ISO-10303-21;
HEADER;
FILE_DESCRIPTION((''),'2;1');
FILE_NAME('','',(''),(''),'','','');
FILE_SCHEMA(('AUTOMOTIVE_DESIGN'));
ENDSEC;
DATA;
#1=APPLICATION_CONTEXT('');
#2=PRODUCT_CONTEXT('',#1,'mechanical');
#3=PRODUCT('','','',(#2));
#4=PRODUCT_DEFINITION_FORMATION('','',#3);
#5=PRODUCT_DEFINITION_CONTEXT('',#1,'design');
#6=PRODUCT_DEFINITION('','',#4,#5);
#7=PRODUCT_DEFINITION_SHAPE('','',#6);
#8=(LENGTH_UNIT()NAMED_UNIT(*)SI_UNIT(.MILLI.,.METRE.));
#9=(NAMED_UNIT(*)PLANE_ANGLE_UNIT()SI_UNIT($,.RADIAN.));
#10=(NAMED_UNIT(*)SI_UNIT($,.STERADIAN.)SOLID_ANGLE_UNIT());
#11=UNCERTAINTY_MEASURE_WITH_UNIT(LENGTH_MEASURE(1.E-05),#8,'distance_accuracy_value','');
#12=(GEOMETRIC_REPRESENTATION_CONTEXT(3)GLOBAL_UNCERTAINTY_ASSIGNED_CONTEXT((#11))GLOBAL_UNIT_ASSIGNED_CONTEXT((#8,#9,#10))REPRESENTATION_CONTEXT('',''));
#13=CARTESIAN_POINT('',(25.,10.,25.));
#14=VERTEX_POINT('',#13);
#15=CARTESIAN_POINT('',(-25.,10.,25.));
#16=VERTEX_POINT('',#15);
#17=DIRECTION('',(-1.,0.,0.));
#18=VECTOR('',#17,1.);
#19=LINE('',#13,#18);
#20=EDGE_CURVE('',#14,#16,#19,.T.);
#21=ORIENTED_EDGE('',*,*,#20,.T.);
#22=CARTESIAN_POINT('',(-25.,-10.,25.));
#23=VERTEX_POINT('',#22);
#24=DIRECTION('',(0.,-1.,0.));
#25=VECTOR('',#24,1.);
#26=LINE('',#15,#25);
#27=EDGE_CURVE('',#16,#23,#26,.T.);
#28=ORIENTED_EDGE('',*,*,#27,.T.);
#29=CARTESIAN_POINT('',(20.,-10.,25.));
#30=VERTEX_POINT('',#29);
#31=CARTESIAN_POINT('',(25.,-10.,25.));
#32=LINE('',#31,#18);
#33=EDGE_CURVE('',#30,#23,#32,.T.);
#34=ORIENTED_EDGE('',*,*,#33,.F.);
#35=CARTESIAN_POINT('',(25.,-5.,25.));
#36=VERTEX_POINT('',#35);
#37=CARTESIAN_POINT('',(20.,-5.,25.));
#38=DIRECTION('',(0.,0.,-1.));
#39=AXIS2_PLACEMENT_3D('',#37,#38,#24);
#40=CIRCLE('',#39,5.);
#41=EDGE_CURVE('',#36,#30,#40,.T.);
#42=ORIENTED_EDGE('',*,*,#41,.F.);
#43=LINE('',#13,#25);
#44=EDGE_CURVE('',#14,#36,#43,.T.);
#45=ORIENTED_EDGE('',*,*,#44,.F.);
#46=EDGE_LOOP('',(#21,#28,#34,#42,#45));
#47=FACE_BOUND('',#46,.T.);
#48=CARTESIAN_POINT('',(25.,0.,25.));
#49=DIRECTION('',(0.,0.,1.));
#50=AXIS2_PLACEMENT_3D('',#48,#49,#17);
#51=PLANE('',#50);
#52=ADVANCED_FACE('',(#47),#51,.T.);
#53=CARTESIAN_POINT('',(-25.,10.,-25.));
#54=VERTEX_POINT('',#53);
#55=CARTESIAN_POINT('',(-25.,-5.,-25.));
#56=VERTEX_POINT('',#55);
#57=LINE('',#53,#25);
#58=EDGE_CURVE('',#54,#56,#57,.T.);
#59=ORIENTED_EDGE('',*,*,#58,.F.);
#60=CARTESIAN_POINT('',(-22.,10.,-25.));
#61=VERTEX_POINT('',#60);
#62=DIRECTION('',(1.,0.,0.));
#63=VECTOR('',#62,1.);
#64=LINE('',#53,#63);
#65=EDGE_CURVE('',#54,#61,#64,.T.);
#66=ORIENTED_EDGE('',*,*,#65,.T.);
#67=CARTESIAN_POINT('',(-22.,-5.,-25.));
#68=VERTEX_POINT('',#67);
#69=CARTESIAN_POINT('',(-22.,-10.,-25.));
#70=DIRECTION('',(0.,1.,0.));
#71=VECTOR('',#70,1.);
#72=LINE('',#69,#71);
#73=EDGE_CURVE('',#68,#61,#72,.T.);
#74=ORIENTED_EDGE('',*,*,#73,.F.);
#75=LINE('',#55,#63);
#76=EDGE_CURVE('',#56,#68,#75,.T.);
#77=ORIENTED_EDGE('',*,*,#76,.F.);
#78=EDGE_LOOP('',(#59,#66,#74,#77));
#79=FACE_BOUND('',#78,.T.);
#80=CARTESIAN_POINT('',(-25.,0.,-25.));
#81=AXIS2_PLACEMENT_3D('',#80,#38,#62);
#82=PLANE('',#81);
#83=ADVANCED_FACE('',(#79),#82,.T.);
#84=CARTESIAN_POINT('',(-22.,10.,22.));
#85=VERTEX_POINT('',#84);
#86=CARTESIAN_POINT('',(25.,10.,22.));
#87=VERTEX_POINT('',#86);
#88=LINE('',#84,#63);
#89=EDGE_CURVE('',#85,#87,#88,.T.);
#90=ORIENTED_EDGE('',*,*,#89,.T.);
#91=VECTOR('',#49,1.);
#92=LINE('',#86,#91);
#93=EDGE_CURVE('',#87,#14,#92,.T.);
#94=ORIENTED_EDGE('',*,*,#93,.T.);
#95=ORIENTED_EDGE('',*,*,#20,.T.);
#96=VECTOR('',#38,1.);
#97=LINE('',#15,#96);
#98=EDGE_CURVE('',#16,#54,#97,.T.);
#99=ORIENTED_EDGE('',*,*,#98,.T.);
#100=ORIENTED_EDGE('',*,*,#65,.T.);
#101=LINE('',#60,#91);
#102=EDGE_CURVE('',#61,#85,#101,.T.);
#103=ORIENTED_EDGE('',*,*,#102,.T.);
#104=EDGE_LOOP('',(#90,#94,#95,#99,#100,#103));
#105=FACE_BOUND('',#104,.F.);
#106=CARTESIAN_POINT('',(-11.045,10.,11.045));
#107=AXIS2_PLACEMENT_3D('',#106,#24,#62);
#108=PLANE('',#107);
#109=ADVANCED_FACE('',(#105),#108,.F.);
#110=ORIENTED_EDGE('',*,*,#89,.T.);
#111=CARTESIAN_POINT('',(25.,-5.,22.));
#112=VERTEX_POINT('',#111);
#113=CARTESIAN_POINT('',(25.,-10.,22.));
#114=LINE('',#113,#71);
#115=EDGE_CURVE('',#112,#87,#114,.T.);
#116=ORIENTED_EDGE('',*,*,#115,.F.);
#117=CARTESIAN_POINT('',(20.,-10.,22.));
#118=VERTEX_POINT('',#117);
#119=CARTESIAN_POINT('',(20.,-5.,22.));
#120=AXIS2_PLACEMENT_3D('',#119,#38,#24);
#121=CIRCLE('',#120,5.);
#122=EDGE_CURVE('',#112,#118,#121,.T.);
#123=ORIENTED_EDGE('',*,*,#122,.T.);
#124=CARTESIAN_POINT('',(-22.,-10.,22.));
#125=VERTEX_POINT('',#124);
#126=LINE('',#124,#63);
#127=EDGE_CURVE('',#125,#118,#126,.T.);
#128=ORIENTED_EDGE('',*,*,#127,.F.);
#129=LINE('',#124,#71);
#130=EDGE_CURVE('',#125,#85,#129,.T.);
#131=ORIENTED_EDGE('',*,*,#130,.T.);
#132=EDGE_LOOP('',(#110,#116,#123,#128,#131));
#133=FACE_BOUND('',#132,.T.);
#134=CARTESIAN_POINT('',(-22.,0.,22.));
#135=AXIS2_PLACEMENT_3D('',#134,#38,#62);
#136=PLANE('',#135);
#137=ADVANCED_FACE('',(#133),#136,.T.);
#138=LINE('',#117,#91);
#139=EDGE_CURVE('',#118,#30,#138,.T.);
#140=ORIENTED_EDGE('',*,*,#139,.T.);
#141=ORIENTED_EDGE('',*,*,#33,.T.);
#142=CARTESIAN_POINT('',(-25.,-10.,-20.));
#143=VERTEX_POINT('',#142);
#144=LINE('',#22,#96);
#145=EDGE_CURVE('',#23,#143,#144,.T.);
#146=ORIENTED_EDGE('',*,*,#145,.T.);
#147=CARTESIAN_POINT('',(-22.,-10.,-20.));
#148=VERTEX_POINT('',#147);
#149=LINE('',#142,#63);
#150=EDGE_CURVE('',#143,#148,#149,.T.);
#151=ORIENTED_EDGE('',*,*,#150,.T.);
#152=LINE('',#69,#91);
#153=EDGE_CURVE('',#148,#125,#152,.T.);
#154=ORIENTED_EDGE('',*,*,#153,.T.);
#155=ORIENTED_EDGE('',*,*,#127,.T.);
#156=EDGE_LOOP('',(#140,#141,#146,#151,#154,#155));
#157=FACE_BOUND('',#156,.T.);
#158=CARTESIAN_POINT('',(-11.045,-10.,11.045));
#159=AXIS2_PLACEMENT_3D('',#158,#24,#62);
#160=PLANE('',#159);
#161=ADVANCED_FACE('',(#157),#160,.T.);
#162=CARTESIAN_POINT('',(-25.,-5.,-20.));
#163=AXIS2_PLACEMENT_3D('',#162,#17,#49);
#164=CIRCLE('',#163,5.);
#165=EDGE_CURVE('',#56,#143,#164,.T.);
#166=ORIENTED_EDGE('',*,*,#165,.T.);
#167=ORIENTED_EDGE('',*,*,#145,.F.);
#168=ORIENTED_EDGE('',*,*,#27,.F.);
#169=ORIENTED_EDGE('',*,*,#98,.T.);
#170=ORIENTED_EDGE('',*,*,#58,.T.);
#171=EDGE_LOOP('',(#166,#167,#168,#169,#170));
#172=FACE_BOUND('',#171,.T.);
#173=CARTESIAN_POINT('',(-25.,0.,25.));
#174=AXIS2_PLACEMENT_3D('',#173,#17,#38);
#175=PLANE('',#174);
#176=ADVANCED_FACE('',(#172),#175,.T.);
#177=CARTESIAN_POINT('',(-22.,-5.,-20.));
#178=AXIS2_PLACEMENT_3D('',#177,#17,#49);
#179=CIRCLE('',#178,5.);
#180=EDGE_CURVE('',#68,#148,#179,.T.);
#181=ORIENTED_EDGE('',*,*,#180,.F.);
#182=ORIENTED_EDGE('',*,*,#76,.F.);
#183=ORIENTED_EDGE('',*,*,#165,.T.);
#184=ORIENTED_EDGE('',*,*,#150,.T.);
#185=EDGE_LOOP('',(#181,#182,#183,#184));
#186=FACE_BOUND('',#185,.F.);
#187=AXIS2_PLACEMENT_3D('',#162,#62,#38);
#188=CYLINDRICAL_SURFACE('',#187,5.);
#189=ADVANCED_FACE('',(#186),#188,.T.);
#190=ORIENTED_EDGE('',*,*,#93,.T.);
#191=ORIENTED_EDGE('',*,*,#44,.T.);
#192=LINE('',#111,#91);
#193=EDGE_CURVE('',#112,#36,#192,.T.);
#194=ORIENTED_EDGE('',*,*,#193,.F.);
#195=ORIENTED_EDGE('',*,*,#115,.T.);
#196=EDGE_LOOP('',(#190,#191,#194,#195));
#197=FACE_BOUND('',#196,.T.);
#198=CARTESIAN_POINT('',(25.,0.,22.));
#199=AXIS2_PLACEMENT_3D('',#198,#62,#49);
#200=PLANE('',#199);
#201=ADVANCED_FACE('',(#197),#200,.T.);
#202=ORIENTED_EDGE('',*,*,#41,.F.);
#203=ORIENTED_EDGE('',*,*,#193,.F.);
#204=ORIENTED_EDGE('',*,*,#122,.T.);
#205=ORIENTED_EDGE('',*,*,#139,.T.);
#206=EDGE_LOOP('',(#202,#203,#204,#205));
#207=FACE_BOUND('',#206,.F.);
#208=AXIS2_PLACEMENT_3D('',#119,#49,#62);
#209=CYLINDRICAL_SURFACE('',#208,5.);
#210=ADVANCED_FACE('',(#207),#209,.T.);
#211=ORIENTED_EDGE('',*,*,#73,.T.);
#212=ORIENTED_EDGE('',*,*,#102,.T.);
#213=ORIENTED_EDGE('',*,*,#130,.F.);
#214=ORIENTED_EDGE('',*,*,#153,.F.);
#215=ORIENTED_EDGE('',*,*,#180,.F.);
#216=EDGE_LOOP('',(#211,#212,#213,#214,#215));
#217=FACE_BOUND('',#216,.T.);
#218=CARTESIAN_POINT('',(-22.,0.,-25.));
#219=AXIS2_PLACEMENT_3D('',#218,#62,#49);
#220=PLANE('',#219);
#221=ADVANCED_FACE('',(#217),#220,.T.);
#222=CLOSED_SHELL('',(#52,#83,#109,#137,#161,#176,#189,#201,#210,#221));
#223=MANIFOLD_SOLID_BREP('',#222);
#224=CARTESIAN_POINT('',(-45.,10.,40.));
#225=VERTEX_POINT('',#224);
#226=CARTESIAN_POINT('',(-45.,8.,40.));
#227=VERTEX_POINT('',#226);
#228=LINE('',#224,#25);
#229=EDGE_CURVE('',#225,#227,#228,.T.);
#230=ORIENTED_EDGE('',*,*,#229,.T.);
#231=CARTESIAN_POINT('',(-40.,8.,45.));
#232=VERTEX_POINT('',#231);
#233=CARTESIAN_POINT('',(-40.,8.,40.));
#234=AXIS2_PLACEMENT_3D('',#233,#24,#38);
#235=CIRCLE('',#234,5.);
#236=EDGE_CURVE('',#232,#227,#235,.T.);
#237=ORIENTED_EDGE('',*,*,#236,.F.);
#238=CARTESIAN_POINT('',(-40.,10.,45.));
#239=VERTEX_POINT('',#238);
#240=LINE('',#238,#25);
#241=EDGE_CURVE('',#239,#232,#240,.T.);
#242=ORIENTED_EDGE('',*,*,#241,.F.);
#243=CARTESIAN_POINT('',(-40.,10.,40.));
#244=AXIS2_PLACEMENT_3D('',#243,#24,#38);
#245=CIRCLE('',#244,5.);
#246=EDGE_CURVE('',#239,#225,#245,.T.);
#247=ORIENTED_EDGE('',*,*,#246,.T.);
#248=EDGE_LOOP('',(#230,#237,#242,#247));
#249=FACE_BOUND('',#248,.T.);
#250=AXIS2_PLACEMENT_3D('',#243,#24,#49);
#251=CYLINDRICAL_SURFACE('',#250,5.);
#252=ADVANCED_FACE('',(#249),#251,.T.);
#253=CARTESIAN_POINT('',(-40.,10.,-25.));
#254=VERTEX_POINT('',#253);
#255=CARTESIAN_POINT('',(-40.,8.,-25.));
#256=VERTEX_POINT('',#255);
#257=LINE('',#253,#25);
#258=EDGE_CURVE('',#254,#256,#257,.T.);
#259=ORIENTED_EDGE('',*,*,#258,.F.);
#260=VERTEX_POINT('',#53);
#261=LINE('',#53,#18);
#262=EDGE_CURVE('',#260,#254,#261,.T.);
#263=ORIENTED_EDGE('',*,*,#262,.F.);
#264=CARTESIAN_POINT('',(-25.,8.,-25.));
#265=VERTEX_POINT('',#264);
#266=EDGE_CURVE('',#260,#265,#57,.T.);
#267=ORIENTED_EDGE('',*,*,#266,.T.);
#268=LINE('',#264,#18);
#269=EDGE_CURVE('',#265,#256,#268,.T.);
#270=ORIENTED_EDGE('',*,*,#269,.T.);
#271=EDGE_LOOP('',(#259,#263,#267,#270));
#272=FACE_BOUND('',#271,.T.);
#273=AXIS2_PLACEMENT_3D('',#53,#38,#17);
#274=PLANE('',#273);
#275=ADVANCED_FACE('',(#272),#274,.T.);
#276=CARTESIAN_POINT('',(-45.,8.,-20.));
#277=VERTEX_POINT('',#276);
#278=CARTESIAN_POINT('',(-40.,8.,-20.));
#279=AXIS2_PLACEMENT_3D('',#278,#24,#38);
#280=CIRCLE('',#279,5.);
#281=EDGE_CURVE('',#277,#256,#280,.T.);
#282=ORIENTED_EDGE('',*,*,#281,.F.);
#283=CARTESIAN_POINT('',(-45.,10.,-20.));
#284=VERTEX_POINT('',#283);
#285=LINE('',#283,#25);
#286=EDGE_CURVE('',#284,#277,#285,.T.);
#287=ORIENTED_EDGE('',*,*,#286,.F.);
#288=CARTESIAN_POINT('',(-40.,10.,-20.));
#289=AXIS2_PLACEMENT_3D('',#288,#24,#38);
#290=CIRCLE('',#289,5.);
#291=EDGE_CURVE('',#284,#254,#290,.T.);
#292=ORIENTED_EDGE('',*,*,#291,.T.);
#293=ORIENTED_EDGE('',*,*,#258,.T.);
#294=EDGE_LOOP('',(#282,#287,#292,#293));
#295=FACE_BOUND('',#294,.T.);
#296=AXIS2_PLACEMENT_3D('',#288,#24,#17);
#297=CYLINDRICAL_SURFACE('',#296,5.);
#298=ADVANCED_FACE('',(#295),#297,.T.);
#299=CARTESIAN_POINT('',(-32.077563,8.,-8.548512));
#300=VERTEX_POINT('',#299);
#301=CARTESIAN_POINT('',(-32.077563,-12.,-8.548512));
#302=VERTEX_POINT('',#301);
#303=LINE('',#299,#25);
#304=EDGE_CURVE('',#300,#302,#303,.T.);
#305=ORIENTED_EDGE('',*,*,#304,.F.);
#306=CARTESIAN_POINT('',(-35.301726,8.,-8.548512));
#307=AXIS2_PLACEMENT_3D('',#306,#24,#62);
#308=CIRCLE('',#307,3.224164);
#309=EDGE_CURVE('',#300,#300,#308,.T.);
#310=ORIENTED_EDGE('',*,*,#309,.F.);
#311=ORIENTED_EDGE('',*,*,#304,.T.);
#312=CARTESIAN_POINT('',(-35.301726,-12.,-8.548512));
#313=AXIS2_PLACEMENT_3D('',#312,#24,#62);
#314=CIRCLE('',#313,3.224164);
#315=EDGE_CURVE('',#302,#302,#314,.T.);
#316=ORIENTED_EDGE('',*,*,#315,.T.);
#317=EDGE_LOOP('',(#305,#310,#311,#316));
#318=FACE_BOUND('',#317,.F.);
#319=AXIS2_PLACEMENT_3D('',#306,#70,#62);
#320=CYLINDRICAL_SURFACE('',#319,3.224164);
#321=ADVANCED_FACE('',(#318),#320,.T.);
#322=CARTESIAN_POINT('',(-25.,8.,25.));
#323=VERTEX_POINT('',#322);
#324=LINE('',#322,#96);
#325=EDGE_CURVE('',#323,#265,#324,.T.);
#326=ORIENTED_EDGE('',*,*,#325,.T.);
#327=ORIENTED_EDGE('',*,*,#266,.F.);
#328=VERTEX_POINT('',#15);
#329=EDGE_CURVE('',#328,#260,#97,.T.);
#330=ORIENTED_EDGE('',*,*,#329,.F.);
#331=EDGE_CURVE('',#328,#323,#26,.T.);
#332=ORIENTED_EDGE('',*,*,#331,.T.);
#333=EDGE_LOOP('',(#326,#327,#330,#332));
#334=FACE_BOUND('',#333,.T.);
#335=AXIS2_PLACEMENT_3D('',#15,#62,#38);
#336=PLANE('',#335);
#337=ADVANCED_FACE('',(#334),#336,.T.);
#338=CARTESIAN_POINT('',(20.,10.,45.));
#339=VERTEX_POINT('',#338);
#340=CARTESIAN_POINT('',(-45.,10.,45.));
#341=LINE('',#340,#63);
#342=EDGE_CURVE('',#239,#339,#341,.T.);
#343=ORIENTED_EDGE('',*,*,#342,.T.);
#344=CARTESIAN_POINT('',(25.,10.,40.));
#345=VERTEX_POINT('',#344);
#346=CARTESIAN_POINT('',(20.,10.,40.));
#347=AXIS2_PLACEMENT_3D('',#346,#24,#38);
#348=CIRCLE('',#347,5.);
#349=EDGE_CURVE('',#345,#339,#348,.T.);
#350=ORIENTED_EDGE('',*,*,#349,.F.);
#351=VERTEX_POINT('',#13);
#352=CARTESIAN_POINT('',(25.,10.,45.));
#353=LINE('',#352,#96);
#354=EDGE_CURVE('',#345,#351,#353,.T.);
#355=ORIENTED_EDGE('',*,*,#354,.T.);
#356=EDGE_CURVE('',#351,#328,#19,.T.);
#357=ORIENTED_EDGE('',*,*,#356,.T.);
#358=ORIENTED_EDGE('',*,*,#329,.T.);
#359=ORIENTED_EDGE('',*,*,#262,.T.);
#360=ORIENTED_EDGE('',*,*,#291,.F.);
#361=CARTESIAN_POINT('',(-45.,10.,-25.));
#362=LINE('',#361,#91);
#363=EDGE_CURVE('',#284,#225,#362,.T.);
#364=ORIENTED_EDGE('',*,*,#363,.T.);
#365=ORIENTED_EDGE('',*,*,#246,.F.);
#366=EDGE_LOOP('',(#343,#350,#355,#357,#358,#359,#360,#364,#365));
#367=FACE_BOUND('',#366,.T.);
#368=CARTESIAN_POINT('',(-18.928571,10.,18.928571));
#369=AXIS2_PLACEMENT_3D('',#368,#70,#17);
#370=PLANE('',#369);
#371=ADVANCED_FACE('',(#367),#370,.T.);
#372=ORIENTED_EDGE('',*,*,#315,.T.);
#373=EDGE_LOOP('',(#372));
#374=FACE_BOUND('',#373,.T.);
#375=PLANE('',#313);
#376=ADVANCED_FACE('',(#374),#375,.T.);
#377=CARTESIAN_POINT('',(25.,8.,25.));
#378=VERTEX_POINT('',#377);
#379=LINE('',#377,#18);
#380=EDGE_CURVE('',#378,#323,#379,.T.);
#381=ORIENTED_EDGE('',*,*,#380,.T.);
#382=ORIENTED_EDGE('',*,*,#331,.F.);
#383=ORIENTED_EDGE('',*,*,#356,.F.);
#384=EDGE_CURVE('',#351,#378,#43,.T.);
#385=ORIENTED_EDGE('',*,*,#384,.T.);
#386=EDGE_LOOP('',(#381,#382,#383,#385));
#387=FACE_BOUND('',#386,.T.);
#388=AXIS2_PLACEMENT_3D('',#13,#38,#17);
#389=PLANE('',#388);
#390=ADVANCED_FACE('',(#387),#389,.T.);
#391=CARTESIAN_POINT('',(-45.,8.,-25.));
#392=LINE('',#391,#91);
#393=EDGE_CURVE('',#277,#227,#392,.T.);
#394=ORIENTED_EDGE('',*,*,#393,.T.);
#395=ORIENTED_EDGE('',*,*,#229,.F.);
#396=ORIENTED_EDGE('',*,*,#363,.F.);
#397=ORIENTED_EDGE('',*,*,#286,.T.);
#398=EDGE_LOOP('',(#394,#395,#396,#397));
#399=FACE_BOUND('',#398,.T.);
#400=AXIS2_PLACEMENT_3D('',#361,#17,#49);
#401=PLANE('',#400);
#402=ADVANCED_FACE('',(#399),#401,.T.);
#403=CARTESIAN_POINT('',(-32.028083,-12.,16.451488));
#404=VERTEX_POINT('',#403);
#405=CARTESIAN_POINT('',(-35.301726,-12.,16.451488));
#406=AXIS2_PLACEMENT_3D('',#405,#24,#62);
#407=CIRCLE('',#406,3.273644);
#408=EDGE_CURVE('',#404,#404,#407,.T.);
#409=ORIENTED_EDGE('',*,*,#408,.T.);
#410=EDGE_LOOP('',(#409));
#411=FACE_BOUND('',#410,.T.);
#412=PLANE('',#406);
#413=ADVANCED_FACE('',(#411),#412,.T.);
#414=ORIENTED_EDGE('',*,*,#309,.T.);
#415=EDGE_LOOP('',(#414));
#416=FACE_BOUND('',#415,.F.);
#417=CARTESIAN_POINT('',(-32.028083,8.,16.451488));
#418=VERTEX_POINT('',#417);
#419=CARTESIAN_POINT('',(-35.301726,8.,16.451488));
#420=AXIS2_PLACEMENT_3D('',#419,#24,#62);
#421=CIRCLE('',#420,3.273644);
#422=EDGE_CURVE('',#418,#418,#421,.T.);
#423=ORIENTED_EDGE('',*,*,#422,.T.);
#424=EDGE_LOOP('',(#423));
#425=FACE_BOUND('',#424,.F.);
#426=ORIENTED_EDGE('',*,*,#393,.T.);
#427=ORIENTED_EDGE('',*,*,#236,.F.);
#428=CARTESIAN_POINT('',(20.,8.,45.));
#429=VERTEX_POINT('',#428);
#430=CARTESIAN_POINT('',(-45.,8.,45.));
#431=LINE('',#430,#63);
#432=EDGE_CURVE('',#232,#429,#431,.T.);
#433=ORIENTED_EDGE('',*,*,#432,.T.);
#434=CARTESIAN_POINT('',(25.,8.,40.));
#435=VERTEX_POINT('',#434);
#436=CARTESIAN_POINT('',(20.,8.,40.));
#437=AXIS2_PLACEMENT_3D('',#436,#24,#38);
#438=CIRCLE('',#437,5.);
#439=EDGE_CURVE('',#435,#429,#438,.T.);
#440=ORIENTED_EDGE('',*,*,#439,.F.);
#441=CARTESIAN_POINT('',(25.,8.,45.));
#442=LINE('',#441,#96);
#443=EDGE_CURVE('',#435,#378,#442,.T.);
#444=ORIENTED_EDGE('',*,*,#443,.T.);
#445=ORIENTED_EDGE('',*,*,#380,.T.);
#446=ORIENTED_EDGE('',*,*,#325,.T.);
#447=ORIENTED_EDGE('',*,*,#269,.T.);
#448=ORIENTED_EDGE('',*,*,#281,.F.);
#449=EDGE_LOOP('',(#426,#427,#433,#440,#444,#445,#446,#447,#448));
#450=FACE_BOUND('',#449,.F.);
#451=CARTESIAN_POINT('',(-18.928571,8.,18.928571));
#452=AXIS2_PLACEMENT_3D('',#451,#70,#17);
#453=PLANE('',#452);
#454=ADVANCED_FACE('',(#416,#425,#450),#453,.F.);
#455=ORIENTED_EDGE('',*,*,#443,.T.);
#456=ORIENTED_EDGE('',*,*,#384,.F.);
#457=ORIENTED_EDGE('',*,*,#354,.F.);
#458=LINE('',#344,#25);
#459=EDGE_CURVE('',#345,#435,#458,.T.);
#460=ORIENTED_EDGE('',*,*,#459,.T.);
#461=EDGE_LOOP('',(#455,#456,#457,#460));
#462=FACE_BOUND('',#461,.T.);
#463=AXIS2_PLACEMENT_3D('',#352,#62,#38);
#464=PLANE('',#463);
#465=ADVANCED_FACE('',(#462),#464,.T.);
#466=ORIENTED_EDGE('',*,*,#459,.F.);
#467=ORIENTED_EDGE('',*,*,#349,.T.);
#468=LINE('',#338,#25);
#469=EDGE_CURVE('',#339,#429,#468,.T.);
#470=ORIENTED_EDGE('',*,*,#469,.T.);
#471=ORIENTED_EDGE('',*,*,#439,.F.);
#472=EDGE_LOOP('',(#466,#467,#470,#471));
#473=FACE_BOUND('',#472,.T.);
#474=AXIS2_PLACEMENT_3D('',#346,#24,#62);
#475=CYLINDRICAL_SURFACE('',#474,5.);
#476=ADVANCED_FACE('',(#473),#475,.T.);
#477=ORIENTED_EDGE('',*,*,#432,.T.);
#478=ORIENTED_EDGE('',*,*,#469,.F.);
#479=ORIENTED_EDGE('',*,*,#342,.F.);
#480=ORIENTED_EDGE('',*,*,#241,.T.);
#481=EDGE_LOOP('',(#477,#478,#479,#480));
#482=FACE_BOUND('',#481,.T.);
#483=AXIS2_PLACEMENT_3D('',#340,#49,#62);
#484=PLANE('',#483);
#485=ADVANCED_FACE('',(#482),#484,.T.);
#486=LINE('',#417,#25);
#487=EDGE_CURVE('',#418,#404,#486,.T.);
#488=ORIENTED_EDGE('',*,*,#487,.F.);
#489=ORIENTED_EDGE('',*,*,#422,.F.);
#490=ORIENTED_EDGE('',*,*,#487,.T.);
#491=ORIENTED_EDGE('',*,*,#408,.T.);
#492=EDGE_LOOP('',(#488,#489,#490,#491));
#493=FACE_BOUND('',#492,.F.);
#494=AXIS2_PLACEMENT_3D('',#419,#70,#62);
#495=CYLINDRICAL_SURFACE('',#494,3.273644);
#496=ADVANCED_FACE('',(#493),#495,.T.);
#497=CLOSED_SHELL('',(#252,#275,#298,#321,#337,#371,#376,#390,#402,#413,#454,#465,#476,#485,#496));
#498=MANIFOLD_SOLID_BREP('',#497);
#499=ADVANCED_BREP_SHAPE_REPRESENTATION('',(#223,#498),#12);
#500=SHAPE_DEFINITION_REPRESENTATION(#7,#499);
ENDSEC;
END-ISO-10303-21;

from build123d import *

# Parameters (mm, degrees)
F1_DEPTH = 10
F3_DEPTH = 2
F4_R     = 3.2736436262
F4_R_2   = 3.2241635896
F5_DEPTH = 20
F6_R     = 5
F6_2_R   = 5


# Not quite as in the source:
# - the program builds the solid bodies; features that only make, move or delete a surface that nothing else refers to are left out


with BuildPart() as f1:
    # F0 (on Front) → F1 (new body, symmetric)
    with BuildSketch(Plane.XZ):
        Polygon((25, 22), (25, 25), (-25, 25), (-25, -25), (-22, -25), (-22, -22), (-22, 22), (22, 22), align=None)
    extrude(amount=F1_DEPTH, both=True)

    # F6
    f6_edges = [f1.edges().sort_by_distance(p)[0] for p in [
        (25, -10, 23.5),
        (-23.5, -10, -25),
    ]]
    fillet(f6_edges, radius=F6_R)


with BuildPart() as f3:
    # F2 (on face) → F3 (new body)
    with BuildSketch(Plane(origin=(0, 10, 0), x_dir=(-1, 0, 0), z_dir=(0, 1, 0))):
        Polygon((-25, 45), (-25, 25), (25, 25), (25, -25), (45, -25), (45, 45), align=None)
    extrude(amount=-F3_DEPTH)

    # F4 (on face) → F5 (join)
    with BuildSketch(Plane.XZ.offset(-8)):
        with Locations((-35.3017263114, 16.4514879785)):
            Circle(F4_R)
        with Locations((-35.3017263114, -8.5485120215)):
            Circle(F4_R_2)
    extrude(amount=F5_DEPTH)

    # F6#2
    f6_2_edges = [f3.edges().sort_by_distance(p)[0] for p in [
        (25, 9, 45),
        (-45, 9, -25),
        (-45, 9, 45),
    ]]
    fillet(f6_2_edges, radius=F6_2_R)


solid = Compound([f1.part, f3.part])
